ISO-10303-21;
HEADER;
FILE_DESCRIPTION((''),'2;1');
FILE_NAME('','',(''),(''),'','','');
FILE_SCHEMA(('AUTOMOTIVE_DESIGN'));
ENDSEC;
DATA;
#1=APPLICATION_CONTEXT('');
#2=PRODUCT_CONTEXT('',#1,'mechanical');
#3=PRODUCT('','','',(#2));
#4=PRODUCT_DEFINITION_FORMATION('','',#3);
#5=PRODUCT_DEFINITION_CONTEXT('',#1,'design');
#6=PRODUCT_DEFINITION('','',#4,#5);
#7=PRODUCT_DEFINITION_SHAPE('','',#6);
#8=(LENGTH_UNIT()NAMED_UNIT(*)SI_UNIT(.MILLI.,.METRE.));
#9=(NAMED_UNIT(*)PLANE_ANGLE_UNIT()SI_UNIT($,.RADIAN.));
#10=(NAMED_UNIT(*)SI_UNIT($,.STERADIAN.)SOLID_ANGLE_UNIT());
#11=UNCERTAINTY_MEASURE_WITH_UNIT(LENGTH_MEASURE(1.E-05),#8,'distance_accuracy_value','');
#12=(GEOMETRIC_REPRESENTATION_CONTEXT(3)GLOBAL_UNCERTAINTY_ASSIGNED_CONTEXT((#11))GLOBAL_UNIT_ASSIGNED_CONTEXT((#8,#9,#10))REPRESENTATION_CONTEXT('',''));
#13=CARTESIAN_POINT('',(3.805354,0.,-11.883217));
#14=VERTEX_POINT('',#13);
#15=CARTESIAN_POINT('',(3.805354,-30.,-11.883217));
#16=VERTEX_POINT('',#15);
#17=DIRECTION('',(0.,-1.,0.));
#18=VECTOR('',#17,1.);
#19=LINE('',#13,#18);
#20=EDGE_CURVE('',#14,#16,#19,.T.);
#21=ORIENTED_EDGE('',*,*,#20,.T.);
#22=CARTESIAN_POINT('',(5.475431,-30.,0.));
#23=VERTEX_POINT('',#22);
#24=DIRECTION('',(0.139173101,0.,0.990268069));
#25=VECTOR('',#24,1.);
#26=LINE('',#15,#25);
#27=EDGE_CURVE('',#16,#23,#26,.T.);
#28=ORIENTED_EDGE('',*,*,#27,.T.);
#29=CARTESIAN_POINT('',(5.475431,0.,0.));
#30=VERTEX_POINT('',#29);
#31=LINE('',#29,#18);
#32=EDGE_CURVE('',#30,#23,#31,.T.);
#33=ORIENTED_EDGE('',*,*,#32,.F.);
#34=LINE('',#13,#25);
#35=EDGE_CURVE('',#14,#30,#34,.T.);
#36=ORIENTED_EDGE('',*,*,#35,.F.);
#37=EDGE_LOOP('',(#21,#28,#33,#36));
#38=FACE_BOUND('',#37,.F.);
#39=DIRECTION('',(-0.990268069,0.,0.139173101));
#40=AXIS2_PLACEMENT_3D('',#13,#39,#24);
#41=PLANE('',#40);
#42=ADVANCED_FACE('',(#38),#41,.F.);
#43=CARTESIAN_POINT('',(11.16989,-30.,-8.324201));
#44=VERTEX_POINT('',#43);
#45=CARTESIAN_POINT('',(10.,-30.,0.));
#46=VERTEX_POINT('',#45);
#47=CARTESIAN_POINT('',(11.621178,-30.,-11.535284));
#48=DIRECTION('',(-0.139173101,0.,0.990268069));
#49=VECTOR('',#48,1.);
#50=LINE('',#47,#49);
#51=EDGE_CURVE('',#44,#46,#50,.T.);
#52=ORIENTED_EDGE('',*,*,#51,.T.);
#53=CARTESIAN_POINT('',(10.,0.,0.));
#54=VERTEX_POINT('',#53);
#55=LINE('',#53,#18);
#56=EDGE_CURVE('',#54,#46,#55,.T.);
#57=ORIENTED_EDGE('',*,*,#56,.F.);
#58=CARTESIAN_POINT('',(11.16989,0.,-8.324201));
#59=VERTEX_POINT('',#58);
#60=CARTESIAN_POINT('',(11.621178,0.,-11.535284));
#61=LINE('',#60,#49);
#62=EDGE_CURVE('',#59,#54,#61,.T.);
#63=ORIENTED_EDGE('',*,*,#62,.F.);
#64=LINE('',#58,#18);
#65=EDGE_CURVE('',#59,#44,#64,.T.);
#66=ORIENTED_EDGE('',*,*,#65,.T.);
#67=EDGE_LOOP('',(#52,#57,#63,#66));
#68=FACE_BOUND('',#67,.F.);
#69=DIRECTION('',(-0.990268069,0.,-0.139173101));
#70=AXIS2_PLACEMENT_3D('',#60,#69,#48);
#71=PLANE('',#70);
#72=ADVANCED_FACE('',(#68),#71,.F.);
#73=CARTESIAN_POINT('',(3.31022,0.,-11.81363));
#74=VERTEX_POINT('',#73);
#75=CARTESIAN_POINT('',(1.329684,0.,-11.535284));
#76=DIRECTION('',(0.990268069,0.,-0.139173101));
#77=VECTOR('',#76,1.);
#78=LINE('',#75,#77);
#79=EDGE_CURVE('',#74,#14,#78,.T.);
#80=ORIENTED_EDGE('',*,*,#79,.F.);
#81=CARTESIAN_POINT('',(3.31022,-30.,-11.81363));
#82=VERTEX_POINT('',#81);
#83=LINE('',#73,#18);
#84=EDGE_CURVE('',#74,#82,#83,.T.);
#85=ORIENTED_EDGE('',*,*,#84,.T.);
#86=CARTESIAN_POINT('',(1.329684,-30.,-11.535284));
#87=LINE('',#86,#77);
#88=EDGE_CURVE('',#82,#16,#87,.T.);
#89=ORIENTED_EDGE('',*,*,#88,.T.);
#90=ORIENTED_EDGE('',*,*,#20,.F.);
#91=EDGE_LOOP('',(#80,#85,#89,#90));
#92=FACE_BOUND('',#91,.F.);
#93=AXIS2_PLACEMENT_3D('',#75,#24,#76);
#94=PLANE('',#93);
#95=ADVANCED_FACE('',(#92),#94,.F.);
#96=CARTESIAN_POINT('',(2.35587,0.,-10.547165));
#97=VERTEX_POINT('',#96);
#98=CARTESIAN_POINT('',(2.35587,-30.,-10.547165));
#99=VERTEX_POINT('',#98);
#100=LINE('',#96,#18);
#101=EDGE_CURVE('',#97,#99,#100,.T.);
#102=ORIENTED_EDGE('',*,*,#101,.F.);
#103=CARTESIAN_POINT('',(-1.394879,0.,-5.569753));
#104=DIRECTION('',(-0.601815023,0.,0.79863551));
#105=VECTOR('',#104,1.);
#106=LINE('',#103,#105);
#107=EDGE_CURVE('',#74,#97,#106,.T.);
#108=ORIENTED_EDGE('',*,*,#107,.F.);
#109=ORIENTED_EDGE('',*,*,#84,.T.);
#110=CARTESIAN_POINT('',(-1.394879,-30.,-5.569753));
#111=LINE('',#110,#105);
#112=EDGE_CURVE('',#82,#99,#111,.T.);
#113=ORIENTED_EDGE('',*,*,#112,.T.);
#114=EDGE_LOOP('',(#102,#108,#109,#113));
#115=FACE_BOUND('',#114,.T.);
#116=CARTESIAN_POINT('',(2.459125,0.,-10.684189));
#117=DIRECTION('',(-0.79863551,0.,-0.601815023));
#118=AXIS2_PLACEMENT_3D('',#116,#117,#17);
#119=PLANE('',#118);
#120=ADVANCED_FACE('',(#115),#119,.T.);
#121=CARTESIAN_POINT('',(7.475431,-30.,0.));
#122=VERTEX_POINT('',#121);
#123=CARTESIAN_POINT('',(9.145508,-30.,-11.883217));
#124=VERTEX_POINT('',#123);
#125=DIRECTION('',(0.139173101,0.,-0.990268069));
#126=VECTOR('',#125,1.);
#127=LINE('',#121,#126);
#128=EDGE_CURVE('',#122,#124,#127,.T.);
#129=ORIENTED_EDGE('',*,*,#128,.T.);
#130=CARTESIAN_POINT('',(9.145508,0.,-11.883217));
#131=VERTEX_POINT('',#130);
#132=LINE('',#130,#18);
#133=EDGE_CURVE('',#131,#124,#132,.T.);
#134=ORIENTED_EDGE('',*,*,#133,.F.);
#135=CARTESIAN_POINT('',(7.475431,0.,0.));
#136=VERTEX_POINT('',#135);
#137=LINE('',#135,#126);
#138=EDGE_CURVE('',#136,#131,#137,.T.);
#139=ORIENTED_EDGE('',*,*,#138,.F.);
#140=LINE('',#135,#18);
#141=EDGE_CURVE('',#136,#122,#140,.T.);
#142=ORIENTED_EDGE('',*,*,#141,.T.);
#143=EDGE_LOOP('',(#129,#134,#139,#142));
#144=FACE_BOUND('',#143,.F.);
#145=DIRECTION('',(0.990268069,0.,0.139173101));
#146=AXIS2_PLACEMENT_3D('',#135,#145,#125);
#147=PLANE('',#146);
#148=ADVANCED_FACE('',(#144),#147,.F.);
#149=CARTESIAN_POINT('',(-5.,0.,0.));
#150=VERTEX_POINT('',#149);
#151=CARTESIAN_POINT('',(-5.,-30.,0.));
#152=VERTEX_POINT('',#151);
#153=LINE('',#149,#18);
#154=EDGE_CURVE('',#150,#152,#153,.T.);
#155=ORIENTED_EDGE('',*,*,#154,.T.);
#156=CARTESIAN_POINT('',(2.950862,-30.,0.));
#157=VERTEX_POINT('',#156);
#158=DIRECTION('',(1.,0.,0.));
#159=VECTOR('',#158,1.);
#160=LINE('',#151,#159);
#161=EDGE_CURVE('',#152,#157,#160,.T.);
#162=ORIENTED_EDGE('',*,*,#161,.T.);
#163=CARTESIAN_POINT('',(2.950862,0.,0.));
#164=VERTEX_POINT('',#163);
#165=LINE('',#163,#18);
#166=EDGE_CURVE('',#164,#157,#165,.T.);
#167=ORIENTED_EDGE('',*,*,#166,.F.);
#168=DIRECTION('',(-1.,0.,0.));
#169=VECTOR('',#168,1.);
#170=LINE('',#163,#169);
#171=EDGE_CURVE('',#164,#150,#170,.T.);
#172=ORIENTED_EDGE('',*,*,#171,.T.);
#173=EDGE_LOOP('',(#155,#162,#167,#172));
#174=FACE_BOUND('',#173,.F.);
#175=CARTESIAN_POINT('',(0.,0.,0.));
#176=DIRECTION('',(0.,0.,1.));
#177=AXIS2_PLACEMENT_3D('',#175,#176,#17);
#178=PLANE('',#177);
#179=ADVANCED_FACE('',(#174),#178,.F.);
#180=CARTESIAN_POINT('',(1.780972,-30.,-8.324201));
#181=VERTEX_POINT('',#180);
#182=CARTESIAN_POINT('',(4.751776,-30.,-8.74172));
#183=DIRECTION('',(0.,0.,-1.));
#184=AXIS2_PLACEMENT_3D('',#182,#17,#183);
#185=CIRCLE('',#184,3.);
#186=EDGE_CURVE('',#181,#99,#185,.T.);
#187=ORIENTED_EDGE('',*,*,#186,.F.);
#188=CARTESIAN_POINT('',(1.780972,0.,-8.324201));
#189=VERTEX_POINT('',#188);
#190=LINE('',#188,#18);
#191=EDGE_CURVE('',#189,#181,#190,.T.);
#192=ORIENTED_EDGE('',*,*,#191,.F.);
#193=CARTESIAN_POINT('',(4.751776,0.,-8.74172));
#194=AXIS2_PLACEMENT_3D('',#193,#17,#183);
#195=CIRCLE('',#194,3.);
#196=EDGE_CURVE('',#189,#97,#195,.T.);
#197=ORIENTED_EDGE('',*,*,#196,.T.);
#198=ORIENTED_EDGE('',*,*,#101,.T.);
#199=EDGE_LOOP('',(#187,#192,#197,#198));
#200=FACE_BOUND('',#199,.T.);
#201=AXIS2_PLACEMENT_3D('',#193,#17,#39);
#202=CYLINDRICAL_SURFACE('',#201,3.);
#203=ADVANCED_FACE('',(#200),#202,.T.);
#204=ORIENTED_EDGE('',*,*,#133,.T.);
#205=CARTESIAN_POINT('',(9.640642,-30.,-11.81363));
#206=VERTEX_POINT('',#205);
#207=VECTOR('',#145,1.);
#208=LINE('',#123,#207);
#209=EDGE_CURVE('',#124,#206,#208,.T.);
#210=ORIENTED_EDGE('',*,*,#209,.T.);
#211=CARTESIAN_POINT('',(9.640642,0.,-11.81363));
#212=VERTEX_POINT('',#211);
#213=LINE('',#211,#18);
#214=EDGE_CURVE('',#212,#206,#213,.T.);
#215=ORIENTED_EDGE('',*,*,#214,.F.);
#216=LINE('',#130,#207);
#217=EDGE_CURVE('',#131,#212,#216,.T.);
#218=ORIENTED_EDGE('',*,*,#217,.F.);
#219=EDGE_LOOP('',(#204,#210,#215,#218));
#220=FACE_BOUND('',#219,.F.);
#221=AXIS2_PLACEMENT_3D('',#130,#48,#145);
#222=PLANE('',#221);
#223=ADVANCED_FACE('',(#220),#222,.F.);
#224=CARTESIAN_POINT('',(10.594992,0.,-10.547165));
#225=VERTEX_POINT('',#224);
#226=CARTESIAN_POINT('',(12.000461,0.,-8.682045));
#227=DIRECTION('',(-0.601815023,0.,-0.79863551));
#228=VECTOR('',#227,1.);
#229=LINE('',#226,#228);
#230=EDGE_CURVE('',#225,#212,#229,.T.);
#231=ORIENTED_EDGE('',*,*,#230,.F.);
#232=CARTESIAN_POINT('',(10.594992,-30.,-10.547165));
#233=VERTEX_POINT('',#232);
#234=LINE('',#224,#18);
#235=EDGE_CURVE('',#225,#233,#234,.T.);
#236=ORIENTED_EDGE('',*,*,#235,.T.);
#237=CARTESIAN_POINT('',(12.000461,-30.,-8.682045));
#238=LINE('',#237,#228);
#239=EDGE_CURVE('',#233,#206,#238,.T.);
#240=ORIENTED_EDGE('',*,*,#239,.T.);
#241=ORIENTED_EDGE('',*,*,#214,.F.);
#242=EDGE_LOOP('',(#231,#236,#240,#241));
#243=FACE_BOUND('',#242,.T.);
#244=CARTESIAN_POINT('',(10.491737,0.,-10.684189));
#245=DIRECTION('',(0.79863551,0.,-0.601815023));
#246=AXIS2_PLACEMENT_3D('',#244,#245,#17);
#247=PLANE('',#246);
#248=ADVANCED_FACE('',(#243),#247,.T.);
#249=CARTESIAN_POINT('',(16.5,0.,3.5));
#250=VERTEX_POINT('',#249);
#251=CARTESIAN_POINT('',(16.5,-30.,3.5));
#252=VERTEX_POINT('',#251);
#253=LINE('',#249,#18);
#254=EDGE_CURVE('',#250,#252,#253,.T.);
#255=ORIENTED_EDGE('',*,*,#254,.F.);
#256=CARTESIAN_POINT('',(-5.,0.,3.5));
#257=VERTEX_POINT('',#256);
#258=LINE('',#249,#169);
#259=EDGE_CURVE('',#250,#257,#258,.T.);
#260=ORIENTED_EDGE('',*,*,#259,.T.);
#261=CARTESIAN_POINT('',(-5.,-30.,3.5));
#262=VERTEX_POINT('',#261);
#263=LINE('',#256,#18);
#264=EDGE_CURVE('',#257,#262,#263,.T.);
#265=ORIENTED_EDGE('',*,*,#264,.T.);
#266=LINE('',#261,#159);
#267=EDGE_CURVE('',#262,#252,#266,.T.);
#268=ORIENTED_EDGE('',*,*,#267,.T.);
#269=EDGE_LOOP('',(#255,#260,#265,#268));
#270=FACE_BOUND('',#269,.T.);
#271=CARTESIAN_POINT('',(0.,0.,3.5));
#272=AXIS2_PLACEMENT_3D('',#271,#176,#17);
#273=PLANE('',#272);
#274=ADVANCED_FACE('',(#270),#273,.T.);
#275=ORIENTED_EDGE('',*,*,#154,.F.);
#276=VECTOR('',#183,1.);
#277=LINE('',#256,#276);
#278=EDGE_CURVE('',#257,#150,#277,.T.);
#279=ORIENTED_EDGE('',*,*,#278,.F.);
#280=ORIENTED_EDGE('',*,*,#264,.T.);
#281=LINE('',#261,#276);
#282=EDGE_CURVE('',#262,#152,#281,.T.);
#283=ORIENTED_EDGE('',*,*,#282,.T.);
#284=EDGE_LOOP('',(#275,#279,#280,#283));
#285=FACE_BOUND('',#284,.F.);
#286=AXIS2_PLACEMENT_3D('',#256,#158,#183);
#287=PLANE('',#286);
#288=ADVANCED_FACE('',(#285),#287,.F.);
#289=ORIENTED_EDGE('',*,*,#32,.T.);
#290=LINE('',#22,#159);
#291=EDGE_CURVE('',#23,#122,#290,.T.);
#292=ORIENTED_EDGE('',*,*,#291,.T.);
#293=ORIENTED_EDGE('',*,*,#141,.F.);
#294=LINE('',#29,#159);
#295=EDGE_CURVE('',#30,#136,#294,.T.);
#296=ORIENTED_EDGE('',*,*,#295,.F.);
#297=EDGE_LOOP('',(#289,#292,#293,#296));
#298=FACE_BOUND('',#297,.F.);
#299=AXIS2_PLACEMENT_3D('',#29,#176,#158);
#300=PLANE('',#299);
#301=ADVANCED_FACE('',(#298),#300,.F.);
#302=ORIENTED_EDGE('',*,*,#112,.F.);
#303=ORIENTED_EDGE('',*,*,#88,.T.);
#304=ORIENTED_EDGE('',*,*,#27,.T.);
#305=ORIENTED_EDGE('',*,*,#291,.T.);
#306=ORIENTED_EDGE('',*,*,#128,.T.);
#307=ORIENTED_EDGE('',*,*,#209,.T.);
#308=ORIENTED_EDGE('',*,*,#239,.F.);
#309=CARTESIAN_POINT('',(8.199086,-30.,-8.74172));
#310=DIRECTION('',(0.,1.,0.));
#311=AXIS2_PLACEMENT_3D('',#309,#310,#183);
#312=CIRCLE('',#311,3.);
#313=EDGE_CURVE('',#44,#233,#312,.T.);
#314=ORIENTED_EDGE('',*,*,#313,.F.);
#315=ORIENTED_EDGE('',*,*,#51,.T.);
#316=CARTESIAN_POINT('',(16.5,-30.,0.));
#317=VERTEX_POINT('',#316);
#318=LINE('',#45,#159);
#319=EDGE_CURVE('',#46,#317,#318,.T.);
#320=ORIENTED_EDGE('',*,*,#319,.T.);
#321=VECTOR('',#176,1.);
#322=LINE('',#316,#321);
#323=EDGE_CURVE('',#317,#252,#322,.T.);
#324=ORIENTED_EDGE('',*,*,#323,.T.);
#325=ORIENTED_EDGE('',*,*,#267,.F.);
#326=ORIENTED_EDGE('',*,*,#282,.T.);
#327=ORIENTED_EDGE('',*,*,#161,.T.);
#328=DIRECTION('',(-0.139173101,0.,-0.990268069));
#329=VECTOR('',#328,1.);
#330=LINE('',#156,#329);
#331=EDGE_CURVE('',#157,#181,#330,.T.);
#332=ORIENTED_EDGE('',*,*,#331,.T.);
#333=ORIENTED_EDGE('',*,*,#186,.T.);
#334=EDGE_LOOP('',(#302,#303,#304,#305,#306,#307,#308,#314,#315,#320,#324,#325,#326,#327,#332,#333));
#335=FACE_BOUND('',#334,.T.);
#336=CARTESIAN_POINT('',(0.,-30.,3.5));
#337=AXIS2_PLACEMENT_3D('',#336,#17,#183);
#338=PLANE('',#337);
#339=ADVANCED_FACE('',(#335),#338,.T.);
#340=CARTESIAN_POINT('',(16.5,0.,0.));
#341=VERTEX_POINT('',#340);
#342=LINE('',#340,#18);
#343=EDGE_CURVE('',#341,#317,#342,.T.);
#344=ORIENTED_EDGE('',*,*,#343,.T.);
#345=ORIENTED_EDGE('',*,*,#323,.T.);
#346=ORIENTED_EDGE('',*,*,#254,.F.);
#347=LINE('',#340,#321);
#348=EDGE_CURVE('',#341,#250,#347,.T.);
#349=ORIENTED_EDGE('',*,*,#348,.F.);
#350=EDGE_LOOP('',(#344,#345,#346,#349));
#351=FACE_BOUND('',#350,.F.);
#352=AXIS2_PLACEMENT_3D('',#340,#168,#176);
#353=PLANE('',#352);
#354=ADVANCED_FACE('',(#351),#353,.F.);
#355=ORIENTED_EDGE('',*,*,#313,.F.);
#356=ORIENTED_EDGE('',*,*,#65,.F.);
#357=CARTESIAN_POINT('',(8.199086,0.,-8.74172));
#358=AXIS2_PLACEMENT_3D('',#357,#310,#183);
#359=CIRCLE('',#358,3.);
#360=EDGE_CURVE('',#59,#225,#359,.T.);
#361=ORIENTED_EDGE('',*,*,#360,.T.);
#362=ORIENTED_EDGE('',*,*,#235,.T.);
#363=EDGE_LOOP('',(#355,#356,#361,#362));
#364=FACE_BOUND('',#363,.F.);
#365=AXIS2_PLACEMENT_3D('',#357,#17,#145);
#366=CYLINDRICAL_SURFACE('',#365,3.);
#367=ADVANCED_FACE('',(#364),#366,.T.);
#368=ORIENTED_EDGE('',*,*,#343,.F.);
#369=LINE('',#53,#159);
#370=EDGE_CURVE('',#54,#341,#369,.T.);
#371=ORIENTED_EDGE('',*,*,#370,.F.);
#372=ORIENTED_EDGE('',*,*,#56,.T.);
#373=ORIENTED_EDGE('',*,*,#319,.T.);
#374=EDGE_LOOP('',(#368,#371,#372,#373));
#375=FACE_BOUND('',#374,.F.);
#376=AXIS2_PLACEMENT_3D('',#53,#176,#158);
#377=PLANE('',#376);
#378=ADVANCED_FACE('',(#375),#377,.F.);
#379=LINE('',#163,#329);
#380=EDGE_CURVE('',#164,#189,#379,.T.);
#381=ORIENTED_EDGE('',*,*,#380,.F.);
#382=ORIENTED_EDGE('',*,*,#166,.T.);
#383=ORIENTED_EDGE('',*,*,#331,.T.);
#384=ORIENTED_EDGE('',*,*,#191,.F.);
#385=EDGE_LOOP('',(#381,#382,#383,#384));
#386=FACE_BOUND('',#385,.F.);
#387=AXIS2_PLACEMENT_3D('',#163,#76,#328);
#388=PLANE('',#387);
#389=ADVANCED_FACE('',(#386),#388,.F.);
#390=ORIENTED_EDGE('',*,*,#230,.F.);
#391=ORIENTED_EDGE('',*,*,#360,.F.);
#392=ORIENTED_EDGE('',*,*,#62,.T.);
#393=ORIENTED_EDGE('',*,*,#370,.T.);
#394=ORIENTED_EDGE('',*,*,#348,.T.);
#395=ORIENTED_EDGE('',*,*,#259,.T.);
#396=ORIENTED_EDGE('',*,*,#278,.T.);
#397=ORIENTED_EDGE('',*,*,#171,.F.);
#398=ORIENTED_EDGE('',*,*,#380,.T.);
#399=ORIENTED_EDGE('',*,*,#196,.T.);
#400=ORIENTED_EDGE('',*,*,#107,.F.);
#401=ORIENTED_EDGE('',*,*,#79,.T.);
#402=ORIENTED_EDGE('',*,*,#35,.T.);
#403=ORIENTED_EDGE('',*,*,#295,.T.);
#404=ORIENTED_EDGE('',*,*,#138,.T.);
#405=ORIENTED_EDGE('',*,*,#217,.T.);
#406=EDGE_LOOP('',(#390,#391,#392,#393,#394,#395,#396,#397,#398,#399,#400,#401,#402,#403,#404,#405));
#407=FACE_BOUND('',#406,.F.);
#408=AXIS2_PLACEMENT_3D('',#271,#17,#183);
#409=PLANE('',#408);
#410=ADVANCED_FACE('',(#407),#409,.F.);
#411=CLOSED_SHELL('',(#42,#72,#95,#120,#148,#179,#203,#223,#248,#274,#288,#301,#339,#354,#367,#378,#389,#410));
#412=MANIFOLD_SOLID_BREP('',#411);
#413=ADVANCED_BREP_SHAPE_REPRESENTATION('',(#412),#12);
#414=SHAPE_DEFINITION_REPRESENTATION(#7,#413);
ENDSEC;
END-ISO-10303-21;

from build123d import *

# Parameters (mm, degrees)
F1_DEPTH = 30
F2_DEPTH = 3.5
F3_DEPTH = 5
F4_SIZE  = 2
F5_R     = 3


# Not quite as in the source:
# - a feature names something its author has since deleted; it is built from what else it names


with BuildPart() as f1:
    # F0 (on Front) → F1 (new body)
    with BuildSketch(Plane.XZ):
        Polygon((5.4754310687, 0), (2.9508621374, 0), (1.3296836853, -11.5352840725), (3.8053538572, -11.8832168249), align=None)
        Polygon((10, 0), (7.4754310687, 0), (9.1455082802, -11.8832168249), (11.6211784521, -11.5352840725), align=None)
        Polygon((0, 3.5), (0, 0), (2.9508621374, 0), (5.4754310687, 0), (7.4754310687, 0), (10, 0), (12.5, 0), (15.5, 0), (20, 0), (20, 3.5), align=None)
    extrude(amount=F1_DEPTH)

    # F2 (cut): a face of the model
    f2_faces = [f1.faces().sort_by_distance(p)[0] for p in [
        (20, -15, 1.75),
    ]]
    extrude(f2_faces, amount=-F2_DEPTH, mode=Mode.SUBTRACT)

    # F3 (add): a face of the model
    f3_faces = [f1.faces().sort_by_distance(p)[0] for p in [
        (0, -15, 1.75),
    ]]
    extrude(f3_faces, amount=F3_DEPTH)

    # F4
    f4_edges = [f1.edges().sort_by_distance(p)[0] for p in [
        (11.621178, -15, -11.535284),
        (1.329684, -15, -11.535284),
    ]]
    chamfer(f4_edges, length=F4_SIZE)

    # F5
    f5_edges = [f1.edges().sort_by_distance(p)[0] for p in [
        (1.60803, -15, -9.554748),
        (11.342832, -15, -9.554748),
    ]]
    fillet(f5_edges, radius=F5_R)


solid = f1.part
